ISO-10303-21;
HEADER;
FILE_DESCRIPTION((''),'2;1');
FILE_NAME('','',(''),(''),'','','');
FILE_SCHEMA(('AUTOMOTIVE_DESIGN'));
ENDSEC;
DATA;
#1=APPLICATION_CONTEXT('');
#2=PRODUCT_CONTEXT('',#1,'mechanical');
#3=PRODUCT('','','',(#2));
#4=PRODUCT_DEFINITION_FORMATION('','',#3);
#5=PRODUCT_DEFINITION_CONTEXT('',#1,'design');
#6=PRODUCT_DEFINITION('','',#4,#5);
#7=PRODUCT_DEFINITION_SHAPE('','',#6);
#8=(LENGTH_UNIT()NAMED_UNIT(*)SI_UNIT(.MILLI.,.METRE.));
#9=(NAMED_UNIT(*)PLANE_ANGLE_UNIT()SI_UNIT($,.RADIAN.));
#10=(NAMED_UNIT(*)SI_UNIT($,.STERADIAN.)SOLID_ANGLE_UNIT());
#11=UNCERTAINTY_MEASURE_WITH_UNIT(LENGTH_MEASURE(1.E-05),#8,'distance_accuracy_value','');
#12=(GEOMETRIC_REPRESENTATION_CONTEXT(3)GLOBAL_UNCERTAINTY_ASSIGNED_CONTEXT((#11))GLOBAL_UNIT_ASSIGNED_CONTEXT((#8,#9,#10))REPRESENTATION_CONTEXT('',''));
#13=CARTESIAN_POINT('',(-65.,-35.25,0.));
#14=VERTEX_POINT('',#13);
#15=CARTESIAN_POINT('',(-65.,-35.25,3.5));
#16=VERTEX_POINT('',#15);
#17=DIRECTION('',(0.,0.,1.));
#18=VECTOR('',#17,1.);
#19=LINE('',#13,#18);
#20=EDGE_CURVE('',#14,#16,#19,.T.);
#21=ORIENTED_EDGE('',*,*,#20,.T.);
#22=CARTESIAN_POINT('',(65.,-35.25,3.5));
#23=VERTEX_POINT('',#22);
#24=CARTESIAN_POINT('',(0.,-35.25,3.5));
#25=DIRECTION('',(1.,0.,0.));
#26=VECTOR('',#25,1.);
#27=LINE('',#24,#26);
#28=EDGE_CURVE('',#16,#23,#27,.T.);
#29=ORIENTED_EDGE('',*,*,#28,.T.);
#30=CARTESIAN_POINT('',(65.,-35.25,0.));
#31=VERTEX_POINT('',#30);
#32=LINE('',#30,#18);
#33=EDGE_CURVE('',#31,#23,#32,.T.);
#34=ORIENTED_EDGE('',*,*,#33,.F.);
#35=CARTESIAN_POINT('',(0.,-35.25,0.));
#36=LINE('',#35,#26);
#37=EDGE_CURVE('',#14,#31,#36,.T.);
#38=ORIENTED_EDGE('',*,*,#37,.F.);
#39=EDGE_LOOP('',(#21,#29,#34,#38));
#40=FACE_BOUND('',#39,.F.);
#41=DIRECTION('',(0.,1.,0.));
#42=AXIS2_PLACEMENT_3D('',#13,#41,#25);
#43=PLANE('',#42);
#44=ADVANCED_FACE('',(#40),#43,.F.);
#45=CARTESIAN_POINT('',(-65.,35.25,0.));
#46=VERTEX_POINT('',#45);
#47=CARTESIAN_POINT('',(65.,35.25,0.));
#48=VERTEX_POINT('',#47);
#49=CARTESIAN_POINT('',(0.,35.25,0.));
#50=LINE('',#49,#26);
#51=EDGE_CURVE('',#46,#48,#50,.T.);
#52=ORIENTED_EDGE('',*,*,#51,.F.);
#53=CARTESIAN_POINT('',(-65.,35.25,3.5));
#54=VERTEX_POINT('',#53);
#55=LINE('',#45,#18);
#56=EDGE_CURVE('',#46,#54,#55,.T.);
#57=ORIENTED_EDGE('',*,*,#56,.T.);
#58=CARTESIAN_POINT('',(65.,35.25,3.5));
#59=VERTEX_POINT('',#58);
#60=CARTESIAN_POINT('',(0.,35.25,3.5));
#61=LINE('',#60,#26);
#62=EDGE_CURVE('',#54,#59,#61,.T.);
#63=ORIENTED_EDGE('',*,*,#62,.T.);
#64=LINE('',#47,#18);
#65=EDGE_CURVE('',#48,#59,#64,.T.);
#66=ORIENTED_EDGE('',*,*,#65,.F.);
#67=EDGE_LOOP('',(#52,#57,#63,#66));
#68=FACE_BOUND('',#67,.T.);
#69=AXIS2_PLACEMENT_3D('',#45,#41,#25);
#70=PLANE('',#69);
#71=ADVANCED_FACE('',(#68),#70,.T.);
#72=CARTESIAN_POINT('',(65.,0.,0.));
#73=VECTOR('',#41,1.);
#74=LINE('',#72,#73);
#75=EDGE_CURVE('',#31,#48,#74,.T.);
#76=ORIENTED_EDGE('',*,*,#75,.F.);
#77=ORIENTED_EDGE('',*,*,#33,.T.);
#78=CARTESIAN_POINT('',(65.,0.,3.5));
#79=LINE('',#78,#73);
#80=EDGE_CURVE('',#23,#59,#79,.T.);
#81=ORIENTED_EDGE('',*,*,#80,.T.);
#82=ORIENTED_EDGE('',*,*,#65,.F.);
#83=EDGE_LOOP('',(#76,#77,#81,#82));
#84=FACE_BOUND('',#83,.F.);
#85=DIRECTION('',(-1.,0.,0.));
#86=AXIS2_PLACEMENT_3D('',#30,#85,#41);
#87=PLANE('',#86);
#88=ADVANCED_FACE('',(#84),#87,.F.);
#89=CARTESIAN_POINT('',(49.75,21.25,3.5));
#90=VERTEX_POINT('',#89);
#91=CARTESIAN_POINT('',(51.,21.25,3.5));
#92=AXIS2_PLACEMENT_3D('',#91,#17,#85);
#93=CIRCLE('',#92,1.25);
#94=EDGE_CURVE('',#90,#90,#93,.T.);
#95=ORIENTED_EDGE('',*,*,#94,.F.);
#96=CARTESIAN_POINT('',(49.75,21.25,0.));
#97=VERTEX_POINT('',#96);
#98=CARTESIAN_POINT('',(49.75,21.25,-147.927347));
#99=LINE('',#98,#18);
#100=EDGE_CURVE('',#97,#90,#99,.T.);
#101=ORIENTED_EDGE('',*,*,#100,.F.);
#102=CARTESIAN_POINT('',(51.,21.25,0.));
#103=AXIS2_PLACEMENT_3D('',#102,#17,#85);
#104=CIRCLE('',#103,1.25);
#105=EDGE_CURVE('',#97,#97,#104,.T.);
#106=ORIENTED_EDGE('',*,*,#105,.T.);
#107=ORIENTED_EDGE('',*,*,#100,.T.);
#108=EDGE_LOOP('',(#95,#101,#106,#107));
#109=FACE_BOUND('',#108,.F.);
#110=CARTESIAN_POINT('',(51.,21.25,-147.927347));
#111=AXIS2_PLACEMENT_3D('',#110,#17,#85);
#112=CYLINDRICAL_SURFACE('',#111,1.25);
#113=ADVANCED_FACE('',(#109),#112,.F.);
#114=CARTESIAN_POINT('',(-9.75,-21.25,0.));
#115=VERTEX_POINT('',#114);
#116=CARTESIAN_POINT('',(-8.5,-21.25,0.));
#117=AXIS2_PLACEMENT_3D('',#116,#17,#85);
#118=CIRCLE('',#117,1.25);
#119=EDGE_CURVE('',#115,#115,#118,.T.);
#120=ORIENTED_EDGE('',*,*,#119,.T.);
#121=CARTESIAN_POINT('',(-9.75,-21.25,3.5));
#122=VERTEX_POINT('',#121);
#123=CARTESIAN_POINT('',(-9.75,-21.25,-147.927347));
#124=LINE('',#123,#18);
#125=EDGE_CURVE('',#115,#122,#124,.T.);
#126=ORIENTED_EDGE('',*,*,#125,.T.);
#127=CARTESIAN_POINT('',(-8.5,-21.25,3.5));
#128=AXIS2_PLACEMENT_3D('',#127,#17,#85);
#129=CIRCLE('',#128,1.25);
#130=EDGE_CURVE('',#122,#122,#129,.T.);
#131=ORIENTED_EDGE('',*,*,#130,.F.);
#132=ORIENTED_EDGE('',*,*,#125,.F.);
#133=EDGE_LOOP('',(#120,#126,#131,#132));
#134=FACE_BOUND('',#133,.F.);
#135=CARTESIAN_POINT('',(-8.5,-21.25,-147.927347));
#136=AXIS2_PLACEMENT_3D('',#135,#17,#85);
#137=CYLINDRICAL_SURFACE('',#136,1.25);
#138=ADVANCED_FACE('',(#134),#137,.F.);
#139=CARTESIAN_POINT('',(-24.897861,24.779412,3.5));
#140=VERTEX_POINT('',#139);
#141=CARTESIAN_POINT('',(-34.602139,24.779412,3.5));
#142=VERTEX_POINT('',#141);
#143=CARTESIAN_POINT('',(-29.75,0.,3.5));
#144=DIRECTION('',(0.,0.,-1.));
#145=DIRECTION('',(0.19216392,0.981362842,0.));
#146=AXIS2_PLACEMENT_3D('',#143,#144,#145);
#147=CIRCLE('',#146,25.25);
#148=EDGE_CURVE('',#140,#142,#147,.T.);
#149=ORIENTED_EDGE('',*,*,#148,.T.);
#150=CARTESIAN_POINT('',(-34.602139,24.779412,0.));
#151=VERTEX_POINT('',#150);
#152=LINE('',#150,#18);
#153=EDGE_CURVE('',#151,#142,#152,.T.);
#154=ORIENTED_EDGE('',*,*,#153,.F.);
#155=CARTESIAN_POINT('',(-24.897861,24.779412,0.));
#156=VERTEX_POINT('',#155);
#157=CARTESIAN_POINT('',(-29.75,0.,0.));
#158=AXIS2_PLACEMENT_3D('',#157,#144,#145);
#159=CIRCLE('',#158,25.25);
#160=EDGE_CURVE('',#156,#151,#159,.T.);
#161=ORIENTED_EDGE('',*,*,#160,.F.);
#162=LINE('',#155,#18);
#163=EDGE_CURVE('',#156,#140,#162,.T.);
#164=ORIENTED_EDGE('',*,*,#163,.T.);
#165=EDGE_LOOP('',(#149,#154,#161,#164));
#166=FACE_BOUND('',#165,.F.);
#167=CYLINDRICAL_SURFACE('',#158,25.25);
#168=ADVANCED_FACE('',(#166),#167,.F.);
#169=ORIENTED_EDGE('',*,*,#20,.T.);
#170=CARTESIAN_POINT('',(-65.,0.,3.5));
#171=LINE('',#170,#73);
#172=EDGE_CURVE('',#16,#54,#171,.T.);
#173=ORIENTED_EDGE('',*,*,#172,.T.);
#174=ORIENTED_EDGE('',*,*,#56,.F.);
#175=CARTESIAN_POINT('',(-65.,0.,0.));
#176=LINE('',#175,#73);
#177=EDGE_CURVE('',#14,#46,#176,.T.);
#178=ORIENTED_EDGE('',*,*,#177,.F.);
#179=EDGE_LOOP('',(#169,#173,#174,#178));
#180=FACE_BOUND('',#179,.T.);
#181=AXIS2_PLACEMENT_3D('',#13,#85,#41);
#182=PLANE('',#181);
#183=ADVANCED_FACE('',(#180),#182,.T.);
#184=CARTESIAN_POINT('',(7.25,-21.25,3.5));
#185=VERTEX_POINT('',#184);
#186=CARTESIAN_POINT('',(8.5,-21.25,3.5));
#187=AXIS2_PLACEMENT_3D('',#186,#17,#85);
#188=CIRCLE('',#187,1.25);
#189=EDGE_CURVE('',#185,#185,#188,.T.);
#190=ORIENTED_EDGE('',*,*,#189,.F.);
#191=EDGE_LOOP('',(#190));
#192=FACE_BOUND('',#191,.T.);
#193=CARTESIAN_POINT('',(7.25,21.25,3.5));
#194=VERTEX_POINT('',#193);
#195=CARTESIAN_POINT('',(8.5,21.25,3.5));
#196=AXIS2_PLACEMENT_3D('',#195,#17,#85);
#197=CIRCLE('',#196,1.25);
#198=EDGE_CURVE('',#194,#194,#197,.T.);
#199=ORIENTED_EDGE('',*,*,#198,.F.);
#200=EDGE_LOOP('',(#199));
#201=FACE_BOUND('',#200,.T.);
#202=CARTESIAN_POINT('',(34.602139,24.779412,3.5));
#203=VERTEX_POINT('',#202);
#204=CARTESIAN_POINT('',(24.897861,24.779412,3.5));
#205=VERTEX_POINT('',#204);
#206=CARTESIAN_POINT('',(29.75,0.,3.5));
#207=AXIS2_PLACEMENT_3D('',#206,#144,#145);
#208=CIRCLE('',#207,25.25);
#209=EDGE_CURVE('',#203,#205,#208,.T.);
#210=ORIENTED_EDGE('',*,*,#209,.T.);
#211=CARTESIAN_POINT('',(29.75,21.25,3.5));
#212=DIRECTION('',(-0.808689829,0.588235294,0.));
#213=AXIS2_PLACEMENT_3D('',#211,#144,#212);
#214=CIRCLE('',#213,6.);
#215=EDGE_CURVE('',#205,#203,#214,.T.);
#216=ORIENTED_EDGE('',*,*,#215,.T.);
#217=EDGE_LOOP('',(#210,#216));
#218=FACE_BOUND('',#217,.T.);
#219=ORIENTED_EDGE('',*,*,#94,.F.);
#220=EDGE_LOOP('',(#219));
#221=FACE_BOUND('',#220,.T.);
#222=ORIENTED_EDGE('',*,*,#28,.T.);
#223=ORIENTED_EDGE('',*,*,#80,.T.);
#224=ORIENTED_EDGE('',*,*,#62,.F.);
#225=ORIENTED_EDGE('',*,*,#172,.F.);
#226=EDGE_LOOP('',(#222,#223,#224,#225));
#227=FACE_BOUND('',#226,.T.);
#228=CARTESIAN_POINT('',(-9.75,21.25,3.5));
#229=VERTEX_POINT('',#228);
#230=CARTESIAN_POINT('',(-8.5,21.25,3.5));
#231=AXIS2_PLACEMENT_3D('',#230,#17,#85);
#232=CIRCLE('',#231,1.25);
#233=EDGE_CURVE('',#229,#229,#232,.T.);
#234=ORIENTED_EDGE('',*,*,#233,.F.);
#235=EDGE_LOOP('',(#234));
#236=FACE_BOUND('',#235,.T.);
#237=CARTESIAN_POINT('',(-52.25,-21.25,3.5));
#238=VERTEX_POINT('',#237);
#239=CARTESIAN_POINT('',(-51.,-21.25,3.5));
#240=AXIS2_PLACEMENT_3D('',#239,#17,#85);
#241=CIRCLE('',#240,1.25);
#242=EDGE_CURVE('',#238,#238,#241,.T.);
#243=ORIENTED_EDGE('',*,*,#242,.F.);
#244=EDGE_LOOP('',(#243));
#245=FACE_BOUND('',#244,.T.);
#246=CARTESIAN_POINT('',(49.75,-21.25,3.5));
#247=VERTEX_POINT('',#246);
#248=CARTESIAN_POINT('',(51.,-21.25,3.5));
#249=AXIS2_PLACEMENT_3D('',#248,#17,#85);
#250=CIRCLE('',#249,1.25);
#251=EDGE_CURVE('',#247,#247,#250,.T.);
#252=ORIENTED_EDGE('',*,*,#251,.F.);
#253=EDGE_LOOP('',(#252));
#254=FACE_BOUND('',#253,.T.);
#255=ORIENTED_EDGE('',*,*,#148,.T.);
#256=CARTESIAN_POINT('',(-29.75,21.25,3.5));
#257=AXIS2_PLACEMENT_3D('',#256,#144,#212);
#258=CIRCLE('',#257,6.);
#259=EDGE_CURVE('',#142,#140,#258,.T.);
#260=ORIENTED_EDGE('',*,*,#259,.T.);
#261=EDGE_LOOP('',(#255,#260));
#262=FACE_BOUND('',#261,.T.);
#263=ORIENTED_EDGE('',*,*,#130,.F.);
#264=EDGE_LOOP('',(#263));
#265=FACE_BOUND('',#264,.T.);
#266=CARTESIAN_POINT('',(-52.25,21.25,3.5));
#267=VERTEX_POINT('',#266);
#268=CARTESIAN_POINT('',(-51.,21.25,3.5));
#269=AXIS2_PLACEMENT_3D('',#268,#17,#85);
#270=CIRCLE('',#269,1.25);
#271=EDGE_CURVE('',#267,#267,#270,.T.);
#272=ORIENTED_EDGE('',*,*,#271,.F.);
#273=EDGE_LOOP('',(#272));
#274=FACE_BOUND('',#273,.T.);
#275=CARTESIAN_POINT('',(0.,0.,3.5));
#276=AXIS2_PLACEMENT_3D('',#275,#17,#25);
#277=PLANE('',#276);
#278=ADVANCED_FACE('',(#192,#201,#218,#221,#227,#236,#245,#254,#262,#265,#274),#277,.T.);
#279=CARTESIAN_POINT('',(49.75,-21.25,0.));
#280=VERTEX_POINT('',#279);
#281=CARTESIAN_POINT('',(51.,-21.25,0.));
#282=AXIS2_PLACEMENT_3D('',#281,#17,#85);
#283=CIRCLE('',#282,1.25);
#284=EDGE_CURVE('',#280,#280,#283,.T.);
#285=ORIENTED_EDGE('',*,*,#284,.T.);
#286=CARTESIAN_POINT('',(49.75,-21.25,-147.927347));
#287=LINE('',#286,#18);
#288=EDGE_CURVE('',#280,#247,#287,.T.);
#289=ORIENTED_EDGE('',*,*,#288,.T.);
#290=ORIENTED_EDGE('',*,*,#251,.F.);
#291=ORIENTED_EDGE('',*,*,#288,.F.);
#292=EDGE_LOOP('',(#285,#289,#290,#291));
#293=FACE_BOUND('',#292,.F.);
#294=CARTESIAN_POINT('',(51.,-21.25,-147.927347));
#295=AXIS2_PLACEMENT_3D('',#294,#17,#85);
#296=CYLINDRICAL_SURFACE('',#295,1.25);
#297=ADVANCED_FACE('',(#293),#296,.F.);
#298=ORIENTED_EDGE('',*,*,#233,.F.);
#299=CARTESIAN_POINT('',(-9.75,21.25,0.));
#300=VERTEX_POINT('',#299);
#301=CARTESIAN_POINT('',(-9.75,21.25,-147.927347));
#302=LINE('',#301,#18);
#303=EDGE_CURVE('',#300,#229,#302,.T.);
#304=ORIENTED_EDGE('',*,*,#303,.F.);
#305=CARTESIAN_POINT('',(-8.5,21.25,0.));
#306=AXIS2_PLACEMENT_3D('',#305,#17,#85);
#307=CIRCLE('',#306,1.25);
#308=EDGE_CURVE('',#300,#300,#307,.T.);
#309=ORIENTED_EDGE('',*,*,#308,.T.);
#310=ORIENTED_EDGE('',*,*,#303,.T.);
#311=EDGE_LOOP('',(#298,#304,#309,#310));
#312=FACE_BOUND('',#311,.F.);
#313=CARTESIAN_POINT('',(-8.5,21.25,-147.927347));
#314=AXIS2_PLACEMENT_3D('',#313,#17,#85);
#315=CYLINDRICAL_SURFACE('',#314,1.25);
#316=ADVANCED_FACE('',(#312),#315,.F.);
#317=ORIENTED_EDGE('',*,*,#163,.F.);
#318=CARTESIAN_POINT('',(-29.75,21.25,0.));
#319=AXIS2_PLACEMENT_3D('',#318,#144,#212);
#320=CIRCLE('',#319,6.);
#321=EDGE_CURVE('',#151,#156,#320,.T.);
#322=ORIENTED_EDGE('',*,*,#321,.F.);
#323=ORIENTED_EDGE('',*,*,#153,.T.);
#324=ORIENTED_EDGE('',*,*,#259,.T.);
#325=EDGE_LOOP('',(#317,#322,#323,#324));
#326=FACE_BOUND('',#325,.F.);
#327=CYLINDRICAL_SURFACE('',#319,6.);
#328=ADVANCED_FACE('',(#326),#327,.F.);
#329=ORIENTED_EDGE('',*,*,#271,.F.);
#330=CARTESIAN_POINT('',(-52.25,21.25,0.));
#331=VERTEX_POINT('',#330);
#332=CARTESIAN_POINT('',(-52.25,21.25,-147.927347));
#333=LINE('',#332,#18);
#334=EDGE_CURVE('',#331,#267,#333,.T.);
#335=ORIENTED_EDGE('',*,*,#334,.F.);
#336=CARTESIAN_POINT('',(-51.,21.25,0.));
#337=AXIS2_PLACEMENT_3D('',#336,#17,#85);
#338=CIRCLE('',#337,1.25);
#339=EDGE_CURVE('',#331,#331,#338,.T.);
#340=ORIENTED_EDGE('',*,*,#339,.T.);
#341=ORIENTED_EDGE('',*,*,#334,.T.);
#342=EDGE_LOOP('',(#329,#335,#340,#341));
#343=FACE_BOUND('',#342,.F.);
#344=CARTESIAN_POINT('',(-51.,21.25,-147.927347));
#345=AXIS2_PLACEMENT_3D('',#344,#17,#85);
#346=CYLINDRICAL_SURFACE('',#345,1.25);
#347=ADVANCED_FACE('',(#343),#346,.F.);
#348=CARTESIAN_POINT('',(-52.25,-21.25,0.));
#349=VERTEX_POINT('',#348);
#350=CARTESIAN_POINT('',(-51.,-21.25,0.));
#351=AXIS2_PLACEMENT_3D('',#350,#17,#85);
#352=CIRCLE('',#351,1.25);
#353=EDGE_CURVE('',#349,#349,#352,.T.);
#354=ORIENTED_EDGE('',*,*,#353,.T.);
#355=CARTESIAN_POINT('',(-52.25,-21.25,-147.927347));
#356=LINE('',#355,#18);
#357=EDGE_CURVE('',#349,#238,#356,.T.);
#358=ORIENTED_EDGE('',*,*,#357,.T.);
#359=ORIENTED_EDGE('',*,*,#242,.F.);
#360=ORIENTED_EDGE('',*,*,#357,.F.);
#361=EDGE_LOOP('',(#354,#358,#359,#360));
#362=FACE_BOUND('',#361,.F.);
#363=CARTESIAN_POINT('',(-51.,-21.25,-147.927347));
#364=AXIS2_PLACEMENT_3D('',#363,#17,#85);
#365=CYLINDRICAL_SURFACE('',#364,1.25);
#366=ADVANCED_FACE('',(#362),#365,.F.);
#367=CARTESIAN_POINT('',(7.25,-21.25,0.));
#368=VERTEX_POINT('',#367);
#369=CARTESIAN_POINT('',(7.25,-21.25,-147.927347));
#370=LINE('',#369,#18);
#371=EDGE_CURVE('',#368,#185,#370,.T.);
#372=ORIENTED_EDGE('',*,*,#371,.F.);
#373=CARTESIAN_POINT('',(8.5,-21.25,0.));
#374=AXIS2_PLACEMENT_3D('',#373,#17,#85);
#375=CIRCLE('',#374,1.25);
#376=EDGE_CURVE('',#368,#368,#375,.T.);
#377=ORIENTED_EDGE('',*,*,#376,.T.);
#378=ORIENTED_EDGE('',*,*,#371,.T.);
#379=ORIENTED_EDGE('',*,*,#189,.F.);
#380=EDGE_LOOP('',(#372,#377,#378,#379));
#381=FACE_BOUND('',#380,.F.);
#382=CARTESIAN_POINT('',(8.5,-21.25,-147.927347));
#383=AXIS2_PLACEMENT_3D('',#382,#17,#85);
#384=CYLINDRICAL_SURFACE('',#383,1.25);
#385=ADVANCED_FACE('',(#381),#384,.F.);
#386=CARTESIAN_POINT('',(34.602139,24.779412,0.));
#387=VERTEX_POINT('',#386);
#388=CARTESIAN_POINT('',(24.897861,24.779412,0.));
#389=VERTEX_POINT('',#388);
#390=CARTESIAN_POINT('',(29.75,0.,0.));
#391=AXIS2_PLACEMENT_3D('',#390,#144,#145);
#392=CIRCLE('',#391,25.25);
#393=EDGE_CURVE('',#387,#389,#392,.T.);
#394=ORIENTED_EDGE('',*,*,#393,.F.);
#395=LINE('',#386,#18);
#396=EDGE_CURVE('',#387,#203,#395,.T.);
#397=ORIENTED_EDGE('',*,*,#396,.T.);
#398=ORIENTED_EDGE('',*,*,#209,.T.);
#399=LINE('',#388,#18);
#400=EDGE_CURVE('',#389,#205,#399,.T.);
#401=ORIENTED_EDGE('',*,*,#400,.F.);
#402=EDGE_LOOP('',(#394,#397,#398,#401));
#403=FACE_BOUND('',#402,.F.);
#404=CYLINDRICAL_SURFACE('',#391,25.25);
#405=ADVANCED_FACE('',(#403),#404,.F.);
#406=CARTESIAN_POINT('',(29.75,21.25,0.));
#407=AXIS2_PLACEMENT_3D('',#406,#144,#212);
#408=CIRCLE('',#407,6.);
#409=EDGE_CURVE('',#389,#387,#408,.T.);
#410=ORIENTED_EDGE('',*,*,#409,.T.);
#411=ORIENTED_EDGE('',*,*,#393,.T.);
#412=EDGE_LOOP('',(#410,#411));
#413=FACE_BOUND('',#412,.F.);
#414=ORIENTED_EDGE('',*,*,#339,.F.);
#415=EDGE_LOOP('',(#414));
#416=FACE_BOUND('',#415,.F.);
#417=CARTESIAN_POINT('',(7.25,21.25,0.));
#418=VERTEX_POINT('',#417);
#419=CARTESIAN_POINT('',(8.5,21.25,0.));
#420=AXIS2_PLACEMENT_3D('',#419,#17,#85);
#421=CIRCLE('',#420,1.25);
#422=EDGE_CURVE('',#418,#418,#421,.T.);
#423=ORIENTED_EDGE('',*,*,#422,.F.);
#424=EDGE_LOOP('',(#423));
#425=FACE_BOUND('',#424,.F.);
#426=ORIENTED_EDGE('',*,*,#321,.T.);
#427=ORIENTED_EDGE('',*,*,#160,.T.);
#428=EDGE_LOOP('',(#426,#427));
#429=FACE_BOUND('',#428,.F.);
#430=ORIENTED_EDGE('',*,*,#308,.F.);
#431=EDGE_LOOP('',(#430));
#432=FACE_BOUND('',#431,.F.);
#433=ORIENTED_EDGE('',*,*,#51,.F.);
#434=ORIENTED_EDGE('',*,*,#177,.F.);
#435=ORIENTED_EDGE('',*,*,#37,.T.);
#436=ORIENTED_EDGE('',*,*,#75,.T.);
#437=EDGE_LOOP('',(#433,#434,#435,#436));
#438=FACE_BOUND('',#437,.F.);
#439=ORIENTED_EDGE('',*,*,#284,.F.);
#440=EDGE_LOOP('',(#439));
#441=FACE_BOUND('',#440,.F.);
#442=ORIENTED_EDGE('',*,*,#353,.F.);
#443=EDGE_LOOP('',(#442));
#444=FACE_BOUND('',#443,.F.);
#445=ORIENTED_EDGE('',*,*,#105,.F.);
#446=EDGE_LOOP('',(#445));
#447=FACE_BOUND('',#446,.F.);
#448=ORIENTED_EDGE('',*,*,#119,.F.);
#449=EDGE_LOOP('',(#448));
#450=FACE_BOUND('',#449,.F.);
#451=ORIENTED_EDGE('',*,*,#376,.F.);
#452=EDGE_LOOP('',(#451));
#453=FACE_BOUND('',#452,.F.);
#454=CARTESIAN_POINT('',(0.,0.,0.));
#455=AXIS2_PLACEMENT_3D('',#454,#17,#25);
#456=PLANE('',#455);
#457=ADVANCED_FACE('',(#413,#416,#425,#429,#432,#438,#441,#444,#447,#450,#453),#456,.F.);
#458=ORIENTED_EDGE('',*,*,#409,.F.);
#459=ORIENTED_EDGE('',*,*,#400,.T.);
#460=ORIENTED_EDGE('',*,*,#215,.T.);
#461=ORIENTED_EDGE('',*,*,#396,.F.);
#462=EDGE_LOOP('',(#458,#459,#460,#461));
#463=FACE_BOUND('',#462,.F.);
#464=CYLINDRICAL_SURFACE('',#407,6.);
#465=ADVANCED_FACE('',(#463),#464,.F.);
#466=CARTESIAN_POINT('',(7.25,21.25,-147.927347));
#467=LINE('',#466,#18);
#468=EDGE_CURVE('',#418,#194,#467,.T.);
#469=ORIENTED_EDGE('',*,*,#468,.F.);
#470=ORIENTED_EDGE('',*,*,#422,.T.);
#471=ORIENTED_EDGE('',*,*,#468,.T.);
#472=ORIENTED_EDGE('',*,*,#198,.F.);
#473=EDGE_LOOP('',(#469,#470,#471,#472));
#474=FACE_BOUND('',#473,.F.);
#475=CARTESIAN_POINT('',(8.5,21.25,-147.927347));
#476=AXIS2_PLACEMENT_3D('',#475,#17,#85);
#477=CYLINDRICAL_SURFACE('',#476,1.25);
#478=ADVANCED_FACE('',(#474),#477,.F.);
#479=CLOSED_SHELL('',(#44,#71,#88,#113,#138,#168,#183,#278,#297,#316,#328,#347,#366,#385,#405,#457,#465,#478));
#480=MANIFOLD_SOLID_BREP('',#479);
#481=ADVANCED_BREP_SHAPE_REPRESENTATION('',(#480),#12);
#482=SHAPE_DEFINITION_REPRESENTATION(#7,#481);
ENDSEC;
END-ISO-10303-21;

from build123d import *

# Parameters (mm, degrees)
F0_W     = 130
F0_H     = 70.5
F1_DEPTH = 3.5
F2_D     = 2.5


# Not quite as in the source:
# - a feature names something its author has since deleted; it is built from what else it names


with BuildPart() as f1:
    # F0 (on Top) → F1 (new body)
    with BuildSketch(Plane.XY):
        Rectangle(F0_W, F0_H)
        with BuildLine():
            ThreePointArc((-24.8978610289, 24.7794117647), (-29.75, -25.25), (-34.6021389711, 24.7794117647))
            ThreePointArc((-34.6021389711, 24.7794117647), (-29.75, 27.25), (-24.8978610289, 24.7794117647))
        make_face(mode=Mode.SUBTRACT)
        with BuildLine():
            ThreePointArc((34.6021389711, 24.7794117647), (29.75, -25.25), (24.8978610289, 24.7794117647))
            ThreePointArc((24.8978610289, 24.7794117647), (29.75, 27.25), (34.6021389711, 24.7794117647))
        make_face(mode=Mode.SUBTRACT)
    extrude(amount=F1_DEPTH)

    # F2 (through all)
    with Locations(Plane(origin=(0, 0, 0), x_dir=(1, 0, 0), z_dir=(0, 0, -1))):
        with Locations((-51, -21.25), (-51, 21.25), (-8.5, 21.25), (-8.5, -21.25), (8.5, -21.25), (8.5, 21.25), (51, 21.25), (51, -21.25)):
            Hole(F2_D / 2)


solid = f1.part
